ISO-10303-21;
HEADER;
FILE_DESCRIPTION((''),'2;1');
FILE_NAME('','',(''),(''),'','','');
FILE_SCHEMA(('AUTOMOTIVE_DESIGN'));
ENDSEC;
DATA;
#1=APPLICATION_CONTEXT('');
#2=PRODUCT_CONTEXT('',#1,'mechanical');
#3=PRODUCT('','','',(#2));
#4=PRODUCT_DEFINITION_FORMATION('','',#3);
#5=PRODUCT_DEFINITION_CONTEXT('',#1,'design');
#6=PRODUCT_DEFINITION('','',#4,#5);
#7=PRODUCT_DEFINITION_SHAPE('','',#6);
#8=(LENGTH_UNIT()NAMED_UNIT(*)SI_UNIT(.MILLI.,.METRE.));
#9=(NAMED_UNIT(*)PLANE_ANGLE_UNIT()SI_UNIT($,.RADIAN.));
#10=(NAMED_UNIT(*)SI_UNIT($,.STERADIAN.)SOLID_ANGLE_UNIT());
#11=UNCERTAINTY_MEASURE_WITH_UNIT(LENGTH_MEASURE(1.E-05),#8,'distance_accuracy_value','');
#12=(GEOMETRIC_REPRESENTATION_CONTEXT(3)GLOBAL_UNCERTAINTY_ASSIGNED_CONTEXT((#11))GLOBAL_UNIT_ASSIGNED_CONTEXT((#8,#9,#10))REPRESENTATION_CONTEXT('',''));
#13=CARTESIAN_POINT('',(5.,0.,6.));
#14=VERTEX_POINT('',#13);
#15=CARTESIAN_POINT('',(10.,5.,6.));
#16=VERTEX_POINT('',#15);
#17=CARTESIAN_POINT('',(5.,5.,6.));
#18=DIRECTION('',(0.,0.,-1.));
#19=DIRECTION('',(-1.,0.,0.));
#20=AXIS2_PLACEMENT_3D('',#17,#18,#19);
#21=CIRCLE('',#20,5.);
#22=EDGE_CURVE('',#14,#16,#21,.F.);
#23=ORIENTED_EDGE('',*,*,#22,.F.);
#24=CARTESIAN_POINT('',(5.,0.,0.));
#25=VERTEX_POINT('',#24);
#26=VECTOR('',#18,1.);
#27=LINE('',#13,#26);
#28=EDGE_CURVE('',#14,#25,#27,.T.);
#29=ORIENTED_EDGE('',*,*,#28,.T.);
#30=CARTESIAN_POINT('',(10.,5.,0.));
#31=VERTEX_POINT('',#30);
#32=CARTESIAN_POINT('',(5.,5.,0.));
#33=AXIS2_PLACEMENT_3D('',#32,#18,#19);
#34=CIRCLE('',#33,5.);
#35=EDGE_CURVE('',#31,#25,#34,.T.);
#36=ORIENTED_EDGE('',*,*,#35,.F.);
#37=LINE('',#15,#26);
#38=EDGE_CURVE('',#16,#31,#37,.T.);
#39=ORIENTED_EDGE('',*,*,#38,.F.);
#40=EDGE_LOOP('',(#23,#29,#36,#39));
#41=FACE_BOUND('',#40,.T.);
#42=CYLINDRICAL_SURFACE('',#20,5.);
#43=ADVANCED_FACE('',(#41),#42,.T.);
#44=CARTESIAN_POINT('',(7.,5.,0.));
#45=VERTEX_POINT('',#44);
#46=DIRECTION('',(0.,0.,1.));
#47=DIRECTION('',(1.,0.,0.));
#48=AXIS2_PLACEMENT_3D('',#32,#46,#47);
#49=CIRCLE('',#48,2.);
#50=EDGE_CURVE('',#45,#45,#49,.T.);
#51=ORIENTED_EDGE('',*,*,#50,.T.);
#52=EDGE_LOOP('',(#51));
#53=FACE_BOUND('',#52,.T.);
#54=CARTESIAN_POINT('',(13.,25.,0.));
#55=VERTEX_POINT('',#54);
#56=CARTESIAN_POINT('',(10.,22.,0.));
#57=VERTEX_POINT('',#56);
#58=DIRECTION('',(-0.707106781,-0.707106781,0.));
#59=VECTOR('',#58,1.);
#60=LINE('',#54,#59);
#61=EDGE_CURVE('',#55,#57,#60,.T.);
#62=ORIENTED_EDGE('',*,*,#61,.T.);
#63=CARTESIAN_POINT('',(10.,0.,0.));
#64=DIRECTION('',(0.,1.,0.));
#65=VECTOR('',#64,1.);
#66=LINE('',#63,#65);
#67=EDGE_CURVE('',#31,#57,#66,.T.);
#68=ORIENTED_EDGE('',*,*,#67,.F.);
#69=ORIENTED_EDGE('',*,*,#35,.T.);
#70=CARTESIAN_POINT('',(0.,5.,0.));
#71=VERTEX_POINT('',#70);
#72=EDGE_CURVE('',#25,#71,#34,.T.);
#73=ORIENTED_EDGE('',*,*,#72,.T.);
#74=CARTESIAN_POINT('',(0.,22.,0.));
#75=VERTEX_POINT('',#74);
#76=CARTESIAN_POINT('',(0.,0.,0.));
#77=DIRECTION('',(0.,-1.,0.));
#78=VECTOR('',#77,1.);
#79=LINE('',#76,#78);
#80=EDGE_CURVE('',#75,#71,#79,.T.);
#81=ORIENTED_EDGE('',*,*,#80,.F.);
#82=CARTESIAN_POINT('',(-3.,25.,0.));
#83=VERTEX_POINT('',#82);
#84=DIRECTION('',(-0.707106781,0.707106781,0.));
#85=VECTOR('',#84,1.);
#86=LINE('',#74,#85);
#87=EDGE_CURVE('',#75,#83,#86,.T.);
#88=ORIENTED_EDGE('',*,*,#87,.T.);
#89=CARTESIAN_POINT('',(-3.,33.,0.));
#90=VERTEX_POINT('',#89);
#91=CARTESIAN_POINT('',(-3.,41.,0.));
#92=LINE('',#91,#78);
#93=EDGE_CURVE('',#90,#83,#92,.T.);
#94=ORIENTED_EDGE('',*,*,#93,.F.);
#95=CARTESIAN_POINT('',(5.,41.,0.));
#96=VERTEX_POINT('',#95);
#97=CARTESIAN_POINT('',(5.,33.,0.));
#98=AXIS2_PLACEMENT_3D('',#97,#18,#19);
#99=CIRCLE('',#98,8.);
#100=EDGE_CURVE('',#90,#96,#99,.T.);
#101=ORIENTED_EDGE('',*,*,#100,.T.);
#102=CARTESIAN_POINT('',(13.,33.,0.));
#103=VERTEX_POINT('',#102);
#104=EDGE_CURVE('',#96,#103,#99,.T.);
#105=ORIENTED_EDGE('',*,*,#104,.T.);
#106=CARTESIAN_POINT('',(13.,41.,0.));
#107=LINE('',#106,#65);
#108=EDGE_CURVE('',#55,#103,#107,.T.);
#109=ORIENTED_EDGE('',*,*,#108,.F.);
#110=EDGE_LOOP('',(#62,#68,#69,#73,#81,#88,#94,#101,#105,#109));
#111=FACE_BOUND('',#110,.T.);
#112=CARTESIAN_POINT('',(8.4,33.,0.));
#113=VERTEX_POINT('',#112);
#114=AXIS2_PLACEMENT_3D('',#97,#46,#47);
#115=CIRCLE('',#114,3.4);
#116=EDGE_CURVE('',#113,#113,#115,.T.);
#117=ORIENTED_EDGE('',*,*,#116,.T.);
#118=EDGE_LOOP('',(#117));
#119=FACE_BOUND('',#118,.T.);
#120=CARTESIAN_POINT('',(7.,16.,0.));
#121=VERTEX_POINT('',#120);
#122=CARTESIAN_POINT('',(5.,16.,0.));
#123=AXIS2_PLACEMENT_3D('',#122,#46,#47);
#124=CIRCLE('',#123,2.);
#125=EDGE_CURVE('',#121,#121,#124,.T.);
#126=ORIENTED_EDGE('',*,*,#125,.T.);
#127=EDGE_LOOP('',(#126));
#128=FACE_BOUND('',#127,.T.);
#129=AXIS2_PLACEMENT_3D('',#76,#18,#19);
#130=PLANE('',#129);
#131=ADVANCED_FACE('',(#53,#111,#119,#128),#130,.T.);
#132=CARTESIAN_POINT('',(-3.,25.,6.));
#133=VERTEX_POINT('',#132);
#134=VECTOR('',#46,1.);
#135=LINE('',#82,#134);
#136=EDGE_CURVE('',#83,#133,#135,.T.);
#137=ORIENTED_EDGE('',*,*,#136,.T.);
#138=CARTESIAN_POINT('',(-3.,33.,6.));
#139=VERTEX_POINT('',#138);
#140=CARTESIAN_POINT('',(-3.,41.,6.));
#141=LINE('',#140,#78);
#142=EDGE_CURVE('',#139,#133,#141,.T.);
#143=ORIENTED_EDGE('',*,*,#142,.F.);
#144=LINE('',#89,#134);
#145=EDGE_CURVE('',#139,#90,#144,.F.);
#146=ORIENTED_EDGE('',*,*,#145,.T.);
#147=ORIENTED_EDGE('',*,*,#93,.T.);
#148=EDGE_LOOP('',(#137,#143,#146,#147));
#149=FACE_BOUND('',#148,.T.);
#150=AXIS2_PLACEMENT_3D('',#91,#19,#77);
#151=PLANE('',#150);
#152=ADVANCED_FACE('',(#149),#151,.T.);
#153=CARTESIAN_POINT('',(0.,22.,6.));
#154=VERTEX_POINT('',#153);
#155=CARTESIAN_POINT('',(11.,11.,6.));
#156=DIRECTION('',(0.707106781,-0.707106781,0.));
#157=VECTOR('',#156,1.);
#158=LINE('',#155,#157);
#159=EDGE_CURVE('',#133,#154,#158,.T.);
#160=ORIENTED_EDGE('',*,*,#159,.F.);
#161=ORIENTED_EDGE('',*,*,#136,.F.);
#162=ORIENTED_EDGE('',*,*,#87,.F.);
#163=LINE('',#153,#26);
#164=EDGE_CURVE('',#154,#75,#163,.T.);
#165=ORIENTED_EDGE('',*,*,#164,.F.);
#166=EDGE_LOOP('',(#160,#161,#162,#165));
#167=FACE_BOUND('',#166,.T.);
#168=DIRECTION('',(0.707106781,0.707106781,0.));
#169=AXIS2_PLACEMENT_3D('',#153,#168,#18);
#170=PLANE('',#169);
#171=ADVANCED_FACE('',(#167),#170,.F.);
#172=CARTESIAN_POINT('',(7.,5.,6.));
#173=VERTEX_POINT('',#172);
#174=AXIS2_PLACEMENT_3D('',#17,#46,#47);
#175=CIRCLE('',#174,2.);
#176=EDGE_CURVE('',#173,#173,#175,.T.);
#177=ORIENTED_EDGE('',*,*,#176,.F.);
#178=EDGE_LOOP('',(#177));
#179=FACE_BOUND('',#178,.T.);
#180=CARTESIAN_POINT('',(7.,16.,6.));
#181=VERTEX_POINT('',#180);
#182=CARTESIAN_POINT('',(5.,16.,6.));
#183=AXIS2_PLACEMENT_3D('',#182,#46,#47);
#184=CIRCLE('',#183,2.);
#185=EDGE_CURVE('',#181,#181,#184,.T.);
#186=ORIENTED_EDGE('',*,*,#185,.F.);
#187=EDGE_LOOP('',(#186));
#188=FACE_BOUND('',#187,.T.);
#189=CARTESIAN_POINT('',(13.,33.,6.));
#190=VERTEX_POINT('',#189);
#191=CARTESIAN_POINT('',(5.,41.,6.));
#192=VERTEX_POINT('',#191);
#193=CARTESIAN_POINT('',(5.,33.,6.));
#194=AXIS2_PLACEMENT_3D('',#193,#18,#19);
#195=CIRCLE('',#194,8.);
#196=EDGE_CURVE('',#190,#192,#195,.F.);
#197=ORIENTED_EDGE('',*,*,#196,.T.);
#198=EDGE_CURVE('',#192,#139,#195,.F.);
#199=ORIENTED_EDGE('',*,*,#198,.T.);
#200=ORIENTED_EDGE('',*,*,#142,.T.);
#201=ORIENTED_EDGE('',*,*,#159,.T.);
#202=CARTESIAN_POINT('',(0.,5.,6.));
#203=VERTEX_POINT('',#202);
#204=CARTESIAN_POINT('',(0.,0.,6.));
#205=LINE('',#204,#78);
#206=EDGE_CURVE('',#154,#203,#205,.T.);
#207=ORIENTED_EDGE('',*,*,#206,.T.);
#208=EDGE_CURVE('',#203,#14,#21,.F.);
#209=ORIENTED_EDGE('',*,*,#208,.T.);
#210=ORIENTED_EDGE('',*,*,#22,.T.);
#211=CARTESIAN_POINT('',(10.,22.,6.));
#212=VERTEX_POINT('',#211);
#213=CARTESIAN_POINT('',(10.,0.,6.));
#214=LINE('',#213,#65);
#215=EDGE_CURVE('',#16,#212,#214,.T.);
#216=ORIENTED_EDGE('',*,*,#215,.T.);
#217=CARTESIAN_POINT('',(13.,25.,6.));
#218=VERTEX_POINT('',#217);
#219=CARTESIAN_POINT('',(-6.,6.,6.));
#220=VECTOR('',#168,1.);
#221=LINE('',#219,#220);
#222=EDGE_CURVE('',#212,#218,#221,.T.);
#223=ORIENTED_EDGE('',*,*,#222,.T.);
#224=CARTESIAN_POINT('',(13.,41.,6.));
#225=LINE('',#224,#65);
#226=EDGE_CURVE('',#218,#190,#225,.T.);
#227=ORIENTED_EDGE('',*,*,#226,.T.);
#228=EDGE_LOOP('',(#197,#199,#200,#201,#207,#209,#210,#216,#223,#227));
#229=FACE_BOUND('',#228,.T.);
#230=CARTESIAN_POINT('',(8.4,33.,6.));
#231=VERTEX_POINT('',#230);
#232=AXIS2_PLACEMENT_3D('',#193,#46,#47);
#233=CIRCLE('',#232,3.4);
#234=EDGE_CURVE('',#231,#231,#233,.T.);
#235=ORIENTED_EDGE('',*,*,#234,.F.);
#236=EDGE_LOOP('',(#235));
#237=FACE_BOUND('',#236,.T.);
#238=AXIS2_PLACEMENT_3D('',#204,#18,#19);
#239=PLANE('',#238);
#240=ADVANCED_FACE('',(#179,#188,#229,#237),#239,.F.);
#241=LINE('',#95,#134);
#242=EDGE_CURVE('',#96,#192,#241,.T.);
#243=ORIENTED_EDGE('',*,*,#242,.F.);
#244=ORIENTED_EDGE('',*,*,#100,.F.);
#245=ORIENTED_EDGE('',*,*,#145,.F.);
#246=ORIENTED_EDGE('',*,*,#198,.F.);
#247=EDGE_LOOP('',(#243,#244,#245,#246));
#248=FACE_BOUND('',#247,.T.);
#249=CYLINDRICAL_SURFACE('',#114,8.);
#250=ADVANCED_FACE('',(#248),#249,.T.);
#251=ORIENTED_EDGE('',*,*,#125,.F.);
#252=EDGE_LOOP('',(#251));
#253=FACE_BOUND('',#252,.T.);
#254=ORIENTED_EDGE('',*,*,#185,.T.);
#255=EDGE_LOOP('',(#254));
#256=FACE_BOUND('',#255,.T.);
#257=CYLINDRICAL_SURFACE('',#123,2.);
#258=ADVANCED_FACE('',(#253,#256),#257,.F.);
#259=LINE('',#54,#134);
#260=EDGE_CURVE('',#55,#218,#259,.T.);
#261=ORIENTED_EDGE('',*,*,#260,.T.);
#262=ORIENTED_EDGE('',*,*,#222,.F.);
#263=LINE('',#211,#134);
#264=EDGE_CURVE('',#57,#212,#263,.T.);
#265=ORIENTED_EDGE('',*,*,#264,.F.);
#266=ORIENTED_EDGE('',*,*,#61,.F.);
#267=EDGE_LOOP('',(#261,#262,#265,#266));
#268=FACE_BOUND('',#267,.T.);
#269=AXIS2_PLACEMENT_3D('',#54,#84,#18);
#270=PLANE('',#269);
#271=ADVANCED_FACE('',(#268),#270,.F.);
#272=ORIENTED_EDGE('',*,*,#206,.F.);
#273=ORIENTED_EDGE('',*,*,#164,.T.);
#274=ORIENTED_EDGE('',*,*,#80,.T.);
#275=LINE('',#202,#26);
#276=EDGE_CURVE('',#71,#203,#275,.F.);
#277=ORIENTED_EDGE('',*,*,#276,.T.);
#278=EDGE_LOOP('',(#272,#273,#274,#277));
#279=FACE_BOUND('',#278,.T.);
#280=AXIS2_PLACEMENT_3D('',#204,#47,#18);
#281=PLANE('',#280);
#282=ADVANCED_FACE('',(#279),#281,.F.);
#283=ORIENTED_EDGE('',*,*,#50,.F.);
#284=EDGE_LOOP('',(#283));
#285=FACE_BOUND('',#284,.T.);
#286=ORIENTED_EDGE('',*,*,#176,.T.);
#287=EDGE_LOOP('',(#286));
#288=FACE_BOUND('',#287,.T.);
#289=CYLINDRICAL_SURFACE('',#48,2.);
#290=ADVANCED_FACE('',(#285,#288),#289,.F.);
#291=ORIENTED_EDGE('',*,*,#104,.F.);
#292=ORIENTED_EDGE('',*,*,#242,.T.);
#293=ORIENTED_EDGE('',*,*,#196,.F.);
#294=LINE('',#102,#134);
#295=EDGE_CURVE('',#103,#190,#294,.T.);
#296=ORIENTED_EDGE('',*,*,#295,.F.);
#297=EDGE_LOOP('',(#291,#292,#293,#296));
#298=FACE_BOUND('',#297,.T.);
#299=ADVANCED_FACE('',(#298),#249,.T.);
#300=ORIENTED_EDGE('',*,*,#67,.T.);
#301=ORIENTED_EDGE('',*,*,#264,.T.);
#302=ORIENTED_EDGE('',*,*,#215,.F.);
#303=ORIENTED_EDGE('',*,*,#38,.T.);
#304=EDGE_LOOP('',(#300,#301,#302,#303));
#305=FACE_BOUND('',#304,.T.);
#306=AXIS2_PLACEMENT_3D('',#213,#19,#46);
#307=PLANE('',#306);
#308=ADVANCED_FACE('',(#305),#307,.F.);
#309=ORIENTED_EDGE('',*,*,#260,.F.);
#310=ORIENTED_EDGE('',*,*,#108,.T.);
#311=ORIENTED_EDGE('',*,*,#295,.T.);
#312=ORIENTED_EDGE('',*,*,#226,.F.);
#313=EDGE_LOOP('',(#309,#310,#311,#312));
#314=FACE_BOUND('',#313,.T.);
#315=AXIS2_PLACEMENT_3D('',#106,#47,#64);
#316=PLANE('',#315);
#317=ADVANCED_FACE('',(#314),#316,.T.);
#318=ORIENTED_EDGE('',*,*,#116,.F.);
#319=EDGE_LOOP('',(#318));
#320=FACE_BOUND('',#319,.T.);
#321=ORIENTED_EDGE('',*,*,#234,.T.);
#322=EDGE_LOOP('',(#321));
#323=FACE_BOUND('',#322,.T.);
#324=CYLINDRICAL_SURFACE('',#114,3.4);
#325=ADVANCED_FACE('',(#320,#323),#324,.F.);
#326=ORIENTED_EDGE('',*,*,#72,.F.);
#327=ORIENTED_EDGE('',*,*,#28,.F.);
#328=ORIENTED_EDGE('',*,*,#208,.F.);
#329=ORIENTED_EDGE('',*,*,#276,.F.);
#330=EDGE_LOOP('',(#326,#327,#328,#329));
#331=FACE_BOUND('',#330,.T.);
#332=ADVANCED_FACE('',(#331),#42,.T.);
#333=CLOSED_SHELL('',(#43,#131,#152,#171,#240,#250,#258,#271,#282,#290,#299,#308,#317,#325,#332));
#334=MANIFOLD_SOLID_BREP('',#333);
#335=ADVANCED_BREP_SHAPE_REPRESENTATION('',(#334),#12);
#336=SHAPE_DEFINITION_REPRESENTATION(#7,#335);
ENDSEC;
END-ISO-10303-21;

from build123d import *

# Parameters (mm, degrees)
ESQUISSE1_W             = 10
ESQUISSE1_H             = 25
BOSS_EXTRU_1_DEPTH      = 6
ESQUISSE2_W             = 16
ESQUISSE2_H             = 16
BOSS_EXTRU_2_DEPTH      = 6
ESQUISSE3_R             = 3.4
ESQUISSE3_R_2           = 2
ENL_V_MAT_EXTRU_1_DEPTH = 44.428101501
CONG_1_R                = 8
CHANFREIN1_SIZE         = 3
CONG_2_R                = 5


with BuildPart() as part:
    # Esquisse1 → Boss.-Extru.1 (new body)
    with BuildSketch(Plane.XY):
        with Locations((5, 12.5)):
            Rectangle(ESQUISSE1_W, ESQUISSE1_H)
    extrude(amount=BOSS_EXTRU_1_DEPTH)

    # Esquisse2 → Boss.-Extru.2 (add)
    with BuildSketch(Plane.XY.offset(6)):
        with Locations((5, 33)):
            Rectangle(ESQUISSE2_W, ESQUISSE2_H)
    extrude(amount=-BOSS_EXTRU_2_DEPTH)

    # Esquisse3 → Enlèv. mat.-Extru.1 (cut, through all)
    with BuildSketch(Plane.XY.offset(6)):
        with Locations((5, 33)):
            Circle(ESQUISSE3_R)
        with Locations((5, 16)):
            Circle(ESQUISSE3_R_2)
        with Locations((5, 5)):
            Circle(ESQUISSE3_R_2)
    extrude(amount=-ENL_V_MAT_EXTRU_1_DEPTH, mode=Mode.SUBTRACT)

    # Congé1
    cong_1_edges = [part.edges().sort_by_distance(p)[0] for p in [
        (13, 41, 3),
        (-3, 41, 3),
    ]]
    fillet(cong_1_edges, radius=CONG_1_R - 0.0001)  # a hair under: the kernel refuses the full size

    # Chanfrein1
    chanfrein1_edges = [part.edges().sort_by_distance(p)[0] for p in [
        (10, 25, 3),
        (0, 25, 3),
    ]]
    chamfer(chanfrein1_edges, length=CHANFREIN1_SIZE - 0.0001)  # a hair under: the kernel refuses the full size

    # Congé2
    cong_2_edges = [part.edges().sort_by_distance(p)[0] for p in [
        (10, 0, 3),
        (0, 0, 3),
    ]]
    fillet(cong_2_edges, radius=CONG_2_R - 0.0001)  # a hair under: the kernel refuses the full size


solid = part.part
